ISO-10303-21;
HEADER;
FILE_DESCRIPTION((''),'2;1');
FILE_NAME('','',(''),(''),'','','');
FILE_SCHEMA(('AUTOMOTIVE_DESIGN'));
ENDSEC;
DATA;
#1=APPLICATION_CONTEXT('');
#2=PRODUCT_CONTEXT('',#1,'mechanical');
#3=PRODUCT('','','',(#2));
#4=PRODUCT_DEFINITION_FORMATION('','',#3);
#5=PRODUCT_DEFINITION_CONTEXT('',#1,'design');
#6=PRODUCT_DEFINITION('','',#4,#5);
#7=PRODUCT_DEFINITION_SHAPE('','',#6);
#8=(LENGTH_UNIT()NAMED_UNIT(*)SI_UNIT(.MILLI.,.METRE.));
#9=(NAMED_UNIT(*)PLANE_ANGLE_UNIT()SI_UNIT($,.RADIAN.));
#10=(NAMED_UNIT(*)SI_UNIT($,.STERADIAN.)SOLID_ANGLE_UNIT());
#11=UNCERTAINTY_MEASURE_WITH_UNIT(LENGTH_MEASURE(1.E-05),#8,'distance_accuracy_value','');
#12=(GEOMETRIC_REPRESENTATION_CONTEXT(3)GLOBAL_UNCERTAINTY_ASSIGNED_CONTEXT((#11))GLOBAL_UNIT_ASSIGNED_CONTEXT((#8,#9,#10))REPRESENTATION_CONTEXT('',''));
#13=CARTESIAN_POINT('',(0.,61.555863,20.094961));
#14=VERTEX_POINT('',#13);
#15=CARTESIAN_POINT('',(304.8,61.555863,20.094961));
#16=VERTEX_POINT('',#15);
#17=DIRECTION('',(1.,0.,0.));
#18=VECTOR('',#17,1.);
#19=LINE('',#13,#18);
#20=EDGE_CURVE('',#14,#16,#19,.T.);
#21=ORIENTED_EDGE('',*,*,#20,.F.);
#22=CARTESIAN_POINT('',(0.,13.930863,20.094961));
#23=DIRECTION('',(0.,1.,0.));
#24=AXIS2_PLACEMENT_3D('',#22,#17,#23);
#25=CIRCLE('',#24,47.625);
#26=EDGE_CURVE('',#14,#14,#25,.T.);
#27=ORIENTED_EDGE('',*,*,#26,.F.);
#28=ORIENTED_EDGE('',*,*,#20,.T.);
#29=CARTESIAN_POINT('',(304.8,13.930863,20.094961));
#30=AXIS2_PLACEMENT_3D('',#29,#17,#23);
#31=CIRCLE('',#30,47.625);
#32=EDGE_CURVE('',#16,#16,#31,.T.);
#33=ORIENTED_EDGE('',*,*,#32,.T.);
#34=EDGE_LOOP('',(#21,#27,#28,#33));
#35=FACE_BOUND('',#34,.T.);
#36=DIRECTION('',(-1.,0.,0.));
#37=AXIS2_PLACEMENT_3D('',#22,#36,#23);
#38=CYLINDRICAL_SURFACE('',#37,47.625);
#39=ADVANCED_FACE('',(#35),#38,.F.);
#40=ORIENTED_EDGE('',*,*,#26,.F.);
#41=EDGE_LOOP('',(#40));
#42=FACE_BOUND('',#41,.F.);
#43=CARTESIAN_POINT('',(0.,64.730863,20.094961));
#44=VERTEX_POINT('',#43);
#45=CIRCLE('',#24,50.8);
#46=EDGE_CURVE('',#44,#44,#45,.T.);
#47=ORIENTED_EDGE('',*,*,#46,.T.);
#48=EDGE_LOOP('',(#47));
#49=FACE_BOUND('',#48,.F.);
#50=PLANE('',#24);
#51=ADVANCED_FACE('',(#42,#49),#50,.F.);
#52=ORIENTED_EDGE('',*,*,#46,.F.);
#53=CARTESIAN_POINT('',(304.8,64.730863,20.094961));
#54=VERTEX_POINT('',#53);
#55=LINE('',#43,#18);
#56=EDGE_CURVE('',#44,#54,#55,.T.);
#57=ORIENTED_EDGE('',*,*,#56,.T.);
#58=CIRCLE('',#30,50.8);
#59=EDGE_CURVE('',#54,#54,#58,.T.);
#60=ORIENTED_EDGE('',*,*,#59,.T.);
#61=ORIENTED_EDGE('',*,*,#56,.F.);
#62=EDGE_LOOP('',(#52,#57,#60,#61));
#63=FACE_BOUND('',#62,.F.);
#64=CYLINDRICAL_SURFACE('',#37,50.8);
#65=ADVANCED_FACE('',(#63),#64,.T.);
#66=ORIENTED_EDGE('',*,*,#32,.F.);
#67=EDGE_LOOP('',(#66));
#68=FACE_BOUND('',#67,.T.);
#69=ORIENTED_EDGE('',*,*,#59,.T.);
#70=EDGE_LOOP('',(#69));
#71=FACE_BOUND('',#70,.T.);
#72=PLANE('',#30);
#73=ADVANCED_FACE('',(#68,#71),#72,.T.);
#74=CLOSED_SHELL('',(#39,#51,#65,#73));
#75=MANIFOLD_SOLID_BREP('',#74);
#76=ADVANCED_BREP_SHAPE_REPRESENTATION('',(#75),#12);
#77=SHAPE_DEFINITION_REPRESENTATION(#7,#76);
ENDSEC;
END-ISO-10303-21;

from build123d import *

# Parameters (mm, degrees)
F1_R     = 50.8
F1_R_2   = 47.625
F2_DEPTH = 304.8


# Not quite as in the source:
# - a variable given as a bare number and used for a length is read in inches; the dataset says mm whatever the document's units were


with BuildPart() as f2:
    # F1 (on Right) → F2 (new body)
    with BuildSketch(Plane.YZ):
        with Locations((13.9308627695, 20.094960928)):
            Circle(F1_R)
        with Locations((13.9308627695, 20.094960928)):
            Circle(F1_R_2, mode=Mode.SUBTRACT)
    extrude(amount=F2_DEPTH)


solid = f2.part
